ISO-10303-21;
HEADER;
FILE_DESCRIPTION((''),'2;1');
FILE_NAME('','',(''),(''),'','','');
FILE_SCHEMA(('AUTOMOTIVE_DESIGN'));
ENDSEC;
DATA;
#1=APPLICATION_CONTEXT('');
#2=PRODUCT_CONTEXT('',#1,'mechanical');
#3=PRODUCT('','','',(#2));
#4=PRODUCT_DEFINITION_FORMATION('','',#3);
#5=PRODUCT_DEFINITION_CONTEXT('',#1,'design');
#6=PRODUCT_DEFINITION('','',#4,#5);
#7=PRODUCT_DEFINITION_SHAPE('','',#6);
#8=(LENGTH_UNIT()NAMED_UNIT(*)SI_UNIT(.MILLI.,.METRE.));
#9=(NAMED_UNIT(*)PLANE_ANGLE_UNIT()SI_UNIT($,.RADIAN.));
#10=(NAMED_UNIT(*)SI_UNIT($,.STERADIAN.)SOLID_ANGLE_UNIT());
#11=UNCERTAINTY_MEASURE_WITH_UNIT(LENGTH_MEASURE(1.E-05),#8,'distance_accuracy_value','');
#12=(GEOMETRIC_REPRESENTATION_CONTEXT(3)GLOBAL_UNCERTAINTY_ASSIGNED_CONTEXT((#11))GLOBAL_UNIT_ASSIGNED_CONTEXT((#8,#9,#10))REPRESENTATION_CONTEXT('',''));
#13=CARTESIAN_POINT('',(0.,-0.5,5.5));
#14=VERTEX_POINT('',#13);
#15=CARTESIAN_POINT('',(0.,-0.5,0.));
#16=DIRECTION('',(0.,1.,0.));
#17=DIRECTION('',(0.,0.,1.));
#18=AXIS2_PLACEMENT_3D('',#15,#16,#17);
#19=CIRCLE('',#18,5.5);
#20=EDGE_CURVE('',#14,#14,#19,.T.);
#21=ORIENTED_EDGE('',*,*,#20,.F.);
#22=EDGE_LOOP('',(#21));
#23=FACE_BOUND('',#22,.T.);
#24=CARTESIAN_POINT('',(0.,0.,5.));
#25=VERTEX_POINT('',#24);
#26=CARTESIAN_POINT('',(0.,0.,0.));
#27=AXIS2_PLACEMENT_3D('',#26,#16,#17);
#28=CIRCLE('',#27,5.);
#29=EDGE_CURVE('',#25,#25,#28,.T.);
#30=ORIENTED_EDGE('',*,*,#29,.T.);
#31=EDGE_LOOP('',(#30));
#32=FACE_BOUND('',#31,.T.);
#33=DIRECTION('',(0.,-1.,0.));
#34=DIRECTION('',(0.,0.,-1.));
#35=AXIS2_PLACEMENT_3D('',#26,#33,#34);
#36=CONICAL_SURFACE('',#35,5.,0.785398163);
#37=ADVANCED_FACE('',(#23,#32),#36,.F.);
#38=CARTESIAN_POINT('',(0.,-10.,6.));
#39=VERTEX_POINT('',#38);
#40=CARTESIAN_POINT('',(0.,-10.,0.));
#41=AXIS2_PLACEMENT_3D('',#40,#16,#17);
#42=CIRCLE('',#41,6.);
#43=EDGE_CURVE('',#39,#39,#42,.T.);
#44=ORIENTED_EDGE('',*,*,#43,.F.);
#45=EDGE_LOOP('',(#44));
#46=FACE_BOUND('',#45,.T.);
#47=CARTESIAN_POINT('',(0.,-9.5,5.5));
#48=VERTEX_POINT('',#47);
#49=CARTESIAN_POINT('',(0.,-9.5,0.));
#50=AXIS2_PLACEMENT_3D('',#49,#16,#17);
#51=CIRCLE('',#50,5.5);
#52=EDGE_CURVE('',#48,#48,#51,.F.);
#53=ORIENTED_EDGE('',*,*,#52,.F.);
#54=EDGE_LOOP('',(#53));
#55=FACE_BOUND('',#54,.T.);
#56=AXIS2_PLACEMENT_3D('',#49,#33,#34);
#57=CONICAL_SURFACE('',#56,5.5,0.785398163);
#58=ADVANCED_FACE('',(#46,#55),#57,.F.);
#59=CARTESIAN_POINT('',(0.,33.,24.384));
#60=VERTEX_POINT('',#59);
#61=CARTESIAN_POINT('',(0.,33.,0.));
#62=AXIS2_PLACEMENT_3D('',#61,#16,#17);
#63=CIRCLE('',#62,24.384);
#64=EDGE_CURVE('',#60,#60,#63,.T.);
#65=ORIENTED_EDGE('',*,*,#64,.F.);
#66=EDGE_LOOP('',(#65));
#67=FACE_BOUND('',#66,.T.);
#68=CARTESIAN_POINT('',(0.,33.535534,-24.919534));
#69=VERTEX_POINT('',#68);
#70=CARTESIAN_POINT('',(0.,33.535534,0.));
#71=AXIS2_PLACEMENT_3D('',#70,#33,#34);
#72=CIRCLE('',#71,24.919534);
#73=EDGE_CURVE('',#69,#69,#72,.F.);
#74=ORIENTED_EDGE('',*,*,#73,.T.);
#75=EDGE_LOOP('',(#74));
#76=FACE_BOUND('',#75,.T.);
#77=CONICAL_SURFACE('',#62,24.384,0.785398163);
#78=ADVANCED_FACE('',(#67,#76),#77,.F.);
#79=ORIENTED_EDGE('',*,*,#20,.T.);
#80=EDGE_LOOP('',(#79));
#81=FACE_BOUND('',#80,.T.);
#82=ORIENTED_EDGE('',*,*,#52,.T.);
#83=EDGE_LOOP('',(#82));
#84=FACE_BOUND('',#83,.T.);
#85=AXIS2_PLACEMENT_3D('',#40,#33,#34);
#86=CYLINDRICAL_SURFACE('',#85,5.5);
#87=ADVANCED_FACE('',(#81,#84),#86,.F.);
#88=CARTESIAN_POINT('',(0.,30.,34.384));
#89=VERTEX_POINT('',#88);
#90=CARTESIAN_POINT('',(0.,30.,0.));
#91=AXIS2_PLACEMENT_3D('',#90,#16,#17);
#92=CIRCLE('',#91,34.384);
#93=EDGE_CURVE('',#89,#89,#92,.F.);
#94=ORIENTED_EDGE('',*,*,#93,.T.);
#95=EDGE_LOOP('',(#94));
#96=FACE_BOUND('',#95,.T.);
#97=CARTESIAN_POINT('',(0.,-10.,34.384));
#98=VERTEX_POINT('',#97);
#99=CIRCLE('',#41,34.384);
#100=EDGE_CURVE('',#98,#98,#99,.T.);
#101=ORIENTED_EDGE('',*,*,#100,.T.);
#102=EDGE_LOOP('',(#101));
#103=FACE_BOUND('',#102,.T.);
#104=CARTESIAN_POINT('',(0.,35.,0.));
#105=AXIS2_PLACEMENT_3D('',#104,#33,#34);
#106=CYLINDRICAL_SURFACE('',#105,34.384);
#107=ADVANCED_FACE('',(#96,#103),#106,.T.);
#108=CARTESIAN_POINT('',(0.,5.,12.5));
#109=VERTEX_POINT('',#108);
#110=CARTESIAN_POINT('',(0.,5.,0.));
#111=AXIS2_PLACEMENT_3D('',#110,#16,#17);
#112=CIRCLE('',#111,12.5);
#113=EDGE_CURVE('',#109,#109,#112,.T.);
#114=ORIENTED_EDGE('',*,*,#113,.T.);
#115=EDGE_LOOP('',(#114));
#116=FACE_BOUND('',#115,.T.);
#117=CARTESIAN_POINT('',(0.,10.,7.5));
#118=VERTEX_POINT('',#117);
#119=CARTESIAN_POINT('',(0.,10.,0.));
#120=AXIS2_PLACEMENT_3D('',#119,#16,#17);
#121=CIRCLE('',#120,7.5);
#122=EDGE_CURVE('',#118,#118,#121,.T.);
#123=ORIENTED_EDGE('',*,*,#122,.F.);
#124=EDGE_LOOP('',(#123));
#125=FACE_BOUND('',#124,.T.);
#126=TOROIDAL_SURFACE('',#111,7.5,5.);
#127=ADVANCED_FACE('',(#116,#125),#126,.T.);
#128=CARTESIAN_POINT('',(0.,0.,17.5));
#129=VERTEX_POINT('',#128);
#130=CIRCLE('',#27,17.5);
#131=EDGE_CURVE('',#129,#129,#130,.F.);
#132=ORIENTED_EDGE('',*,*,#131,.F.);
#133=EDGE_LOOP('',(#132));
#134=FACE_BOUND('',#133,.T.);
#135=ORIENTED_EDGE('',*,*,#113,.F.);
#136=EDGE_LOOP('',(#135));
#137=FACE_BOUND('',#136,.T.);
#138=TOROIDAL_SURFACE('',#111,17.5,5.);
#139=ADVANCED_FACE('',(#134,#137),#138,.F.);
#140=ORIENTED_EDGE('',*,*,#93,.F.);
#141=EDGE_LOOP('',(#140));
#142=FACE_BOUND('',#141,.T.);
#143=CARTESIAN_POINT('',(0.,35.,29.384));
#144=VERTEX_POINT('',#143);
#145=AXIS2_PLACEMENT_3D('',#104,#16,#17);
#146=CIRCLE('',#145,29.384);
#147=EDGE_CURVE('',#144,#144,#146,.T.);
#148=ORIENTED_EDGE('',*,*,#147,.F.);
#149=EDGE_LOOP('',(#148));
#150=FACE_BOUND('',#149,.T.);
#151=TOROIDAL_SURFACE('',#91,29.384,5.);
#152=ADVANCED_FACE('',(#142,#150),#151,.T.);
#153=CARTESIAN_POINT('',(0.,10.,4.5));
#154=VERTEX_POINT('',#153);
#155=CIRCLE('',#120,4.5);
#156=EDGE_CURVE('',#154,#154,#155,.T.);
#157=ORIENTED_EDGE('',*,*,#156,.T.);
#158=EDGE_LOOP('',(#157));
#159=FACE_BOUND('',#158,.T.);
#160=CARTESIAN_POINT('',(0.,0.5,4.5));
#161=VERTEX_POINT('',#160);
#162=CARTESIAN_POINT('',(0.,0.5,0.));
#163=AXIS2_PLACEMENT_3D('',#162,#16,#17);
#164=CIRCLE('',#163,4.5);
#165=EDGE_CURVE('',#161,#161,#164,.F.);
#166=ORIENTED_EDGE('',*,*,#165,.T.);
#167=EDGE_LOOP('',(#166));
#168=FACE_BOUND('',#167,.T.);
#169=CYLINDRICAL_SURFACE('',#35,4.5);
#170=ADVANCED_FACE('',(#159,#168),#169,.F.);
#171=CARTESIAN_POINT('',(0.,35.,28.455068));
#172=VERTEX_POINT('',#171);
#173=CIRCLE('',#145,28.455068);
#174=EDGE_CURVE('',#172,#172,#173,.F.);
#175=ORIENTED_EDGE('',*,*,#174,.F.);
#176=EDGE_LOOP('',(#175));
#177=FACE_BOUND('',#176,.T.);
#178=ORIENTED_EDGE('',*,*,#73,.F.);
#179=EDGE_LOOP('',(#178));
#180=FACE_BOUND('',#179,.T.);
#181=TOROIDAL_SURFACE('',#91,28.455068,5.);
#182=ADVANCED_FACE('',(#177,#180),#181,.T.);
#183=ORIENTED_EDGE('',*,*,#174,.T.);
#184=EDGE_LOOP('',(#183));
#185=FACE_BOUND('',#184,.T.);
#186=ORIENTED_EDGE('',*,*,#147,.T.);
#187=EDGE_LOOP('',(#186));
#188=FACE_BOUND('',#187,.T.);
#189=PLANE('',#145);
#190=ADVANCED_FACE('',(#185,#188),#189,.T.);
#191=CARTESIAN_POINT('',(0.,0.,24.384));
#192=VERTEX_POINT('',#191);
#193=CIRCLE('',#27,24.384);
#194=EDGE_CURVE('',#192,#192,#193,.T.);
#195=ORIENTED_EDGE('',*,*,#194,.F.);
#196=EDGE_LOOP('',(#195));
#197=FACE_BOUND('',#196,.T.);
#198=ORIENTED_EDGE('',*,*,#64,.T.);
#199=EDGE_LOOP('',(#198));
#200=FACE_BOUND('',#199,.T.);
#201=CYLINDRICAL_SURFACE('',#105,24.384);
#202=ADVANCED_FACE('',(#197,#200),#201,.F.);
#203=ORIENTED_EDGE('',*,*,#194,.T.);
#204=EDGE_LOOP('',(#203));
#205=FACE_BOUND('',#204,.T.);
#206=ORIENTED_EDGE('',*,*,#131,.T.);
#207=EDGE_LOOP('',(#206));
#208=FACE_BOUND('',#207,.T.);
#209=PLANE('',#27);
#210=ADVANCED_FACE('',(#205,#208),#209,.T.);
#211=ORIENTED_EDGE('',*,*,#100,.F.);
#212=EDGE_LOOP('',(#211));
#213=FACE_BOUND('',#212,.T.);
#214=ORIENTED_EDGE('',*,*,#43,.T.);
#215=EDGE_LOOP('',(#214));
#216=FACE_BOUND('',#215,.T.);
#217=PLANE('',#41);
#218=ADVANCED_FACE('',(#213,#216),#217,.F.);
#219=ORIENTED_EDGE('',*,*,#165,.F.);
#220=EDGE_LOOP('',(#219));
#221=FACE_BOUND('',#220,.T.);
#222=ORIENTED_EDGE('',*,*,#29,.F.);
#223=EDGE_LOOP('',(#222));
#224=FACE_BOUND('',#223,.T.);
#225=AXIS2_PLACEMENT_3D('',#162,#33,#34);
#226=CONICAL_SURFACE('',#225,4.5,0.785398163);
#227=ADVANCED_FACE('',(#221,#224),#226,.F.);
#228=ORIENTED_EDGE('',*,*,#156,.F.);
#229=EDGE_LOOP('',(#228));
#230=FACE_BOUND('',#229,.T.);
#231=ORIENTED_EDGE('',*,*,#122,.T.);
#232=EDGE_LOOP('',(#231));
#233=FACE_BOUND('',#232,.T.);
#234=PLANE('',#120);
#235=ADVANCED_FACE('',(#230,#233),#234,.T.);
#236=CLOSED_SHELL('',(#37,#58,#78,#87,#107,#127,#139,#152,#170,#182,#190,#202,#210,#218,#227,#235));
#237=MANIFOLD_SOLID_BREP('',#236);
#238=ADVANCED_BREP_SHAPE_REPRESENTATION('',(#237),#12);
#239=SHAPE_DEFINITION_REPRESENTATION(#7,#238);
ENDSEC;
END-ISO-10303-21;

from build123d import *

# Parameters (mm, degrees)
SKETCH1_R                  = 34.384
SKETCH1_R_2                = 24.384
BOSS_EXTRUDE1_DEPTH        = 35
BOSS_EXTRUDE2_START        = -10
SKETCH1_3_R                = 34.384
BOSS_EXTRUDE2_DEPTH        = 10
SKETCH3_R                  = 12.5
BOSS_EXTRUDE3_DEPTH        = 10
FILLET1_R                  = 5
F_12_0MM_DOWEL_HOLE1_D     = 11
F_12_0MM_DOWEL_HOLE1_DEPTH = 10
F_8_0MM_DOWEL_HOLE2_D      = 9
CHAMFER1_SIZE              = 2
CHAMFER2_SIZE              = 0.5
CHAMFER4_SIZE              = 0.5
FILLET2_R                  = 5


with BuildPart() as part:
    # Sketch1 → Boss-Extrude1 (new body)
    with BuildSketch(Plane(origin=(0, 0, 0), x_dir=(1, 0, 0), z_dir=(0, 1, 0))):
        with Locations(Location((0, 0, 0), (0, 0, 270))):
            Circle(SKETCH1_R)
        with Locations(Location((0, 0, 0), (0, 0, 270))):
            Circle(SKETCH1_R_2, mode=Mode.SUBTRACT)
    extrude(amount=BOSS_EXTRUDE1_DEPTH)

    # Sketch1<3> → Boss-Extrude2 (add)
    with BuildSketch(Plane(origin=(0, 0, 0), x_dir=(1, 0, 0), z_dir=(0, 1, 0)).offset(BOSS_EXTRUDE2_START)):
        with Locations(Location((0, 0, 0), (0, 0, 270))):
            Circle(SKETCH1_3_R)
    extrude(amount=BOSS_EXTRUDE2_DEPTH)

    # Sketch3 → Boss-Extrude3 (add)
    with BuildSketch(Plane(origin=(0, 0, 0), x_dir=(1, 0, 0), z_dir=(0, 1, 0))):
        with Locations(Location((0, 0, 0), (0, 0, 270))):
            Circle(SKETCH3_R)
    extrude(amount=BOSS_EXTRUDE3_DEPTH)

    # Fillet1
    fillet1_edges = [part.edges().sort_by_distance(p)[0] for p in [
        (0, 0, -12.5),
        (0, 10, -12.5),
    ]]
    fillet(fillet1_edges, radius=FILLET1_R - 0.0001)  # a hair under: the kernel refuses the full size

    # Ø12.0mm Dowel Hole1
    with Locations(Plane(origin=(0, -10, 0), x_dir=(-1, 0, 0), z_dir=(0, -1, 0))):
        with Locations((0, 0)):
            Hole(F_12_0MM_DOWEL_HOLE1_D / 2, depth=F_12_0MM_DOWEL_HOLE1_DEPTH)

    # Ø8.0mm Dowel Hole2 (through all)
    with Locations(Plane(origin=(0, 0, 0), x_dir=(-1, 0, 0), z_dir=(0, -1, 0))):
        with Locations((0, 0)):
            Hole(F_8_0MM_DOWEL_HOLE2_D / 2)

    # Chamfer1
    chamfer1_edges = [part.edges().sort_by_distance(p)[0] for p in [
        (0, 35, -24.384),
    ]]
    chamfer(chamfer1_edges, length=CHAMFER1_SIZE)

    # Chamfer2
    chamfer2_edges = [part.edges().sort_by_distance(p)[0] for p in [
        (-5.5, -10, 0),
    ]]
    chamfer(chamfer2_edges, length=CHAMFER2_SIZE)

    # Chamfer4
    chamfer4_edges = [part.edges().sort_by_distance(p)[0] for p in [
        (-5.5, 0, 0),
        (-4.5, 0, 0),
    ]]
    chamfer(chamfer4_edges, length=CHAMFER4_SIZE - 0.0001)  # a hair under: the kernel refuses the full size

    # Fillet2
    fillet2_edges = [part.edges().sort_by_distance(p)[0] for p in [
        (0, 35, -26.384),
        (0, 35, -34.384),
    ]]
    fillet(fillet2_edges, radius=FILLET2_R)


solid = part.part
